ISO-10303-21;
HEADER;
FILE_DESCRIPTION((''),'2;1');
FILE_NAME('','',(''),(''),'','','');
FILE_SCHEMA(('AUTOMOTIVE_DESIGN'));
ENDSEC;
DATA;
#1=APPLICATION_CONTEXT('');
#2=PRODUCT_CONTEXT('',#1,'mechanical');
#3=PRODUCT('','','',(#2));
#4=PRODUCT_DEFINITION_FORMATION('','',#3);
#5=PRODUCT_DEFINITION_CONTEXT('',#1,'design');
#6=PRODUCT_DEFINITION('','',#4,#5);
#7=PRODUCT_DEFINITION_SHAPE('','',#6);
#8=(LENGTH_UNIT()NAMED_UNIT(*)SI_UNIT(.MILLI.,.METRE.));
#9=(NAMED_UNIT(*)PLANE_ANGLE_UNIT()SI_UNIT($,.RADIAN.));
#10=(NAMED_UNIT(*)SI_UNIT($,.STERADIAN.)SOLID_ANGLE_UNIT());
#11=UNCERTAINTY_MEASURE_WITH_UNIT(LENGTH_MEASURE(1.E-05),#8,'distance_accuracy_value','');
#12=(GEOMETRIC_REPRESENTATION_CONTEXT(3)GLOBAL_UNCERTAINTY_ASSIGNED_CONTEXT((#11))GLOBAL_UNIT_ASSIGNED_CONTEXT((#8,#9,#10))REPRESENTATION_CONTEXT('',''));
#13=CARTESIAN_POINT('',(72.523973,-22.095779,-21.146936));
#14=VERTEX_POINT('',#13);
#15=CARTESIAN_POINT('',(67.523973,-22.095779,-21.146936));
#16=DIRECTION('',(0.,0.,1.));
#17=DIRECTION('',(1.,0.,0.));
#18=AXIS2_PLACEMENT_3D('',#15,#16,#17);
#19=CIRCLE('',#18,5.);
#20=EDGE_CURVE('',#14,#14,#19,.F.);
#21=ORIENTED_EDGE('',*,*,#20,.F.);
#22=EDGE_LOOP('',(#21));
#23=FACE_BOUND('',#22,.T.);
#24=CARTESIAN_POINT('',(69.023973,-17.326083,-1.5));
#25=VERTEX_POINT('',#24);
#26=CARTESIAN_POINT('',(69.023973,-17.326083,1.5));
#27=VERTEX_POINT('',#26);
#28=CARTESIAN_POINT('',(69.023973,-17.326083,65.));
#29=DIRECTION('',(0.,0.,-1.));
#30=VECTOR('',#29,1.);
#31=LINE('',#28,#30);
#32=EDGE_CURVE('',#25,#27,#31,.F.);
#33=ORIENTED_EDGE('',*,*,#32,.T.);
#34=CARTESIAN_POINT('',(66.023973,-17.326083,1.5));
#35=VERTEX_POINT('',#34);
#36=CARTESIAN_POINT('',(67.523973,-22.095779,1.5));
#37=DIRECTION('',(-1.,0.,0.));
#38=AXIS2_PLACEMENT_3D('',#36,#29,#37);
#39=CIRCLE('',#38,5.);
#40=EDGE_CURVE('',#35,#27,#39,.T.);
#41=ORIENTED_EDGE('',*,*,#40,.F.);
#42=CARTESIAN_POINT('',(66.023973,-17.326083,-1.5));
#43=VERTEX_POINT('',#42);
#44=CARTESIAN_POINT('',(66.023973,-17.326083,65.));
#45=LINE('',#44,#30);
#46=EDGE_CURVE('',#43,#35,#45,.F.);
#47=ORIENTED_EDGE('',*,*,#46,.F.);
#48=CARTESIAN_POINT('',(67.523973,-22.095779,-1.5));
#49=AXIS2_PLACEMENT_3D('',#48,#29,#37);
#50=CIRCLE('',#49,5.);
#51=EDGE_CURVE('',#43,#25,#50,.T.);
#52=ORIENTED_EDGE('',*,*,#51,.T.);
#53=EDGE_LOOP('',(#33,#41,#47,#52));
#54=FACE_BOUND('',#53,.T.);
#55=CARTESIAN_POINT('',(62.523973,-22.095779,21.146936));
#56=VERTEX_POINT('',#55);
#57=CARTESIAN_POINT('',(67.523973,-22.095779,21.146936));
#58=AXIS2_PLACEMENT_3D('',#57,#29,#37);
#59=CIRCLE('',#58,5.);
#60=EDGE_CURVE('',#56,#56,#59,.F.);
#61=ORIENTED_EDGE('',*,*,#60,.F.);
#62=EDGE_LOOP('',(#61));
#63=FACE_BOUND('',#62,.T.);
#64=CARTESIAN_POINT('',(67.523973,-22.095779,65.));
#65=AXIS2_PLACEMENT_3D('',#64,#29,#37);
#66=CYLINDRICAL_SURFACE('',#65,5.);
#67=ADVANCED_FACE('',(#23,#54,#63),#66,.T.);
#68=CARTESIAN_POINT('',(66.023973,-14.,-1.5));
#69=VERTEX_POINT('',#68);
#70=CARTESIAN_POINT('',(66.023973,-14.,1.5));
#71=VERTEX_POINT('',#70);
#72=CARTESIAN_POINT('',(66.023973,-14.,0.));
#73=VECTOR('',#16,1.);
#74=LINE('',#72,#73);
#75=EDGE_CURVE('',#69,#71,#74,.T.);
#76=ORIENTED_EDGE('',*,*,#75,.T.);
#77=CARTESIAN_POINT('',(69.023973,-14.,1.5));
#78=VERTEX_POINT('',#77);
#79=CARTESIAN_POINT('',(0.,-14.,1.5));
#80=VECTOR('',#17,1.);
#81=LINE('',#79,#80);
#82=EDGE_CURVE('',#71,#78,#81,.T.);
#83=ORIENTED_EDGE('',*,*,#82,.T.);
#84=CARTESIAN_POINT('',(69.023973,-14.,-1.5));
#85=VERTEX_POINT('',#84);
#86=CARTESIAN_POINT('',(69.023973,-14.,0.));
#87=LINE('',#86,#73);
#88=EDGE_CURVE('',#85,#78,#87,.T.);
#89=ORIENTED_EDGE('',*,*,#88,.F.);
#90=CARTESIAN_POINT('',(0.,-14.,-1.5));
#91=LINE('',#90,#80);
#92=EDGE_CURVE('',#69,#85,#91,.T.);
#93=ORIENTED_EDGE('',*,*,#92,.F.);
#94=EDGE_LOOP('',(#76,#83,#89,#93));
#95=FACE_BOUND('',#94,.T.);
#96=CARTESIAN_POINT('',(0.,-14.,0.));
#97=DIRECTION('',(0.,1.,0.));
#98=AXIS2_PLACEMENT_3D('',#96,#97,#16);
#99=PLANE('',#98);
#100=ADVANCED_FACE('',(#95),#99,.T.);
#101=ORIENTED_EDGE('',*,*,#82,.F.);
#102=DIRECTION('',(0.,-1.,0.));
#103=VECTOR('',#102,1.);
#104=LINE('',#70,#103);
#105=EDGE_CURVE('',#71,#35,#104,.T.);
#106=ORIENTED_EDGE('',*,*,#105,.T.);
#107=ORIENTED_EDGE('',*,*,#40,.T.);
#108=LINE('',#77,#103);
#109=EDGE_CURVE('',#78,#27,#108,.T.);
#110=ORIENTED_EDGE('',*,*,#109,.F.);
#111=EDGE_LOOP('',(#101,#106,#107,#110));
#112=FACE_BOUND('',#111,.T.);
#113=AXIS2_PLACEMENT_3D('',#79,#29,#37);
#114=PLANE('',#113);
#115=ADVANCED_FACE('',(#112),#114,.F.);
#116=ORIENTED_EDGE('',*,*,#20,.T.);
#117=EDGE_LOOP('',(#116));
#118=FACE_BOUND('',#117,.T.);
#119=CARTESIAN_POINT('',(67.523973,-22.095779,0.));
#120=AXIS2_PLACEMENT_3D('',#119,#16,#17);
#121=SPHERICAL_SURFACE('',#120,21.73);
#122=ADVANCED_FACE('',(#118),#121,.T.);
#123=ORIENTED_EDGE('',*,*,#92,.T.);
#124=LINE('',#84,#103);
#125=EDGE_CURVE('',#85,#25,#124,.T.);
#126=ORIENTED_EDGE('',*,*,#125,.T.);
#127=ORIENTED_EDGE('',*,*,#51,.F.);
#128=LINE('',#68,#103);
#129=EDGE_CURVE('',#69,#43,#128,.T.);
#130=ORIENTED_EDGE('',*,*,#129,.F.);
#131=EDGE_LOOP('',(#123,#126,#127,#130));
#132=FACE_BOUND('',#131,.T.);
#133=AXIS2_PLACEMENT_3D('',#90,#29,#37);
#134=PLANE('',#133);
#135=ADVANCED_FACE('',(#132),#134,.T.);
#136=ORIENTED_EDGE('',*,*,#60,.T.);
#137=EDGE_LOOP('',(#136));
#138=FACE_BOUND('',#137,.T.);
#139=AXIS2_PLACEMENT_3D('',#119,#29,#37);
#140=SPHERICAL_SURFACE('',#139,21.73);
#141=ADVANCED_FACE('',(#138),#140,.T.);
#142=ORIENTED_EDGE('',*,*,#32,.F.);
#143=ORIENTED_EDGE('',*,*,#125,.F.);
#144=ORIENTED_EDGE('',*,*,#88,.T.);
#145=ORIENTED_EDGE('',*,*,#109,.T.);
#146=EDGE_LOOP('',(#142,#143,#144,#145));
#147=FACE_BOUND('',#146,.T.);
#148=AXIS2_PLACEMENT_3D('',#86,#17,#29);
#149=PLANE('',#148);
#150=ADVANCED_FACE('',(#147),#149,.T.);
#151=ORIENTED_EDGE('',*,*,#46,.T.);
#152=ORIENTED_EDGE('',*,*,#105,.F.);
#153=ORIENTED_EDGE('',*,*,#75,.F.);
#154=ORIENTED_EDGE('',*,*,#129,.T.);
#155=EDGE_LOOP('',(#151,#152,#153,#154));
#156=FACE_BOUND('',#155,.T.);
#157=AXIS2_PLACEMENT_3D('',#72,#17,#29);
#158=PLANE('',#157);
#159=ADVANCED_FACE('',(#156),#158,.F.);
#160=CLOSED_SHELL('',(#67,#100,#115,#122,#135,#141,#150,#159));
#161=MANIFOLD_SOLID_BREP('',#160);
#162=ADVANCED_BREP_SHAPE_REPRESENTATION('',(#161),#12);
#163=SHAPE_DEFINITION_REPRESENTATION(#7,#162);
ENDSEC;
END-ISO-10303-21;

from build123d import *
from build123d.topology import SkipClean

# Parameters (mm, degrees)
BOSS_EXTRUDE1_DEPTH       = 2
CUT_EXTRUDE4_DEPTH        = 10
SKETCH6_W                 = 2
SKETCH6_H                 = 14.5
CUT_EXTRUDE5_DEPTH        = 10
SKETCH7_W                 = 12.5
SKETCH7_H                 = 12.5
BOSS_EXTRUDE2_DEPTH       = 2.5
SKETCH8_W                 = 2
SKETCH8_H                 = 2
BOSS_EXTRUDE3_DEPTH       = 41.5
CUT_EXTRUDE6_DEPTH        = 41.5
SKETCH10_W                = 2
SKETCH10_H                = 2
BOSS_EXTRUDE4_DEPTH       = 50.5
CUT_EXTRUDE7_DEPTH        = 50.5
SKETCH12_W                = 12.5
SKETCH12_H                = 12.5
BOSS_EXTRUDE5_DEPTH       = 2.5
CUT_EXTRUDE8_DEPTH        = 60.477411679
CUT_EXTRUDE8_DEPTH_BACK   = 2.5
SKETCH14_W                = 12.5
SKETCH14_H                = 12.5
BOSS_EXTRUDE6_DEPTH       = 2.5
SKETCH15_W                = 2
SKETCH15_H                = 2
BOSS_EXTRUDE7_DEPTH       = 39.5
SKETCH16_W                = 12.5
SKETCH16_H                = 12.5
BOSS_EXTRUDE8_DEPTH       = 2.5
SKETCH17_W                = 2
SKETCH17_H                = 12.5
BOSS_EXTRUDE9_DEPTH       = 2.5
SKETCH18_W                = 2
SKETCH18_H                = 12.5
CUT_EXTRUDE9_DEPTH        = 13.5
SKETCH19_W                = 2
SKETCH19_H                = 2
BOSS_EXTRUDE10_DEPTH      = 7.5
CUT_EXTRUDE11_DEPTH       = 33.5
CUT_EXTRUDE12_DEPTH       = 33.5
SKETCH22_W                = 2
SKETCH22_H                = 2
BOSS_EXTRUDE11_DEPTH      = 35.5
BOSS_EXTRUDE13_DEPTH      = 4
BOSS_EXTRUDE14_DEPTH      = 4
BOSS_EXTRUDE15_DEPTH      = 4
BOSS_EXTRUDE16_DEPTH      = 4
SKETCH28_R                = 4.5
SKETCH28_W                = 2
SKETCH28_H                = 2
BOSS_EXTRUDE17_DEPTH      = 57
SKETCH29_R                = 4.5
SKETCH29_W                = 2
SKETCH29_H                = 2
BOSS_EXTRUDE18_DEPTH      = 57
SKETCH30_R                = 4.5
SKETCH30_W                = 2
SKETCH30_H                = 2
BOSS_EXTRUDE19_DEPTH      = 57
SKETCH31_R                = 4.5
SKETCH31_W                = 2
SKETCH31_H                = 2
BOSS_EXTRUDE20_DEPTH      = 57
SKETCH32_W                = 122.959633523
SKETCH32_H                = 42.81362782
CUT_EXTRUDE13_DEPTH       = 57
BOSS_EXTRUDE21_DEPTH      = 1
CUT_EXTRUDE14_DEPTH       = 8
CUT_EXTRUDE15_DEPTH       = 8
CUT_EXTRUDE16_DEPTH       = 8
CUT_EXTRUDE17_DEPTH       = 8
BOSS_EXTRUDE22_DEPTH      = 1
BOSS_EXTRUDE23_DEPTH      = 2
BOSS_EXTRUDE23_DEPTH_BACK = 2
BOSS_EXTRUDE24_DEPTH      = 4
BOSS_EXTRUDE25_DEPTH      = 12.5
CUT_EXTRUDE18_DEPTH       = 12.5
SKETCH43_W                = 16
SKETCH43_H                = 2
CUT_EXTRUDE19_DEPTH       = 8.5
SKETCH44_R                = 1.5
CUT_EXTRUDE20_DEPTH       = 8.5
SKETCH45_R                = 9
BOSS_EXTRUDE27_DEPTH      = 20
CUT_EXTRUDE23_START       = -30
SKETCH50_R                = 9
CUT_EXTRUDE23_DEPTH       = 65
CUT_EXTRUDE24_DEPTH       = 65
CUT_EXTRUDE24_DEPTH_BACK  = 65
SKETCH52_W                = 56.65762051
SKETCH52_H                = 44.736687233
CUT_EXTRUDE25_DEPTH       = 65
CUT_EXTRUDE25_DEPTH_BACK  = 65
CUT_EXTRUDE26_DEPTH       = 65
CUT_EXTRUDE26_DEPTH_BACK  = 68
SKETCH56_R                = 43.614088274
SKETCH56_R_2              = 5
SKETCH57_R                = 5
CUT_EXTRUDE27_DEPTH       = 65
CUT_EXTRUDE28_DEPTH       = 17
CUT_EXTRUDE28_DEPTH_BACK  = 38
SKETCH58_R                = 5
CUT_EXTRUDE29_DEPTH       = 38
CUT_EXTRUDE30_DEPTH       = 38
CUT_EXTRUDE30_DEPTH_BACK  = 38
CUT_EXTRUDE36_DEPTH       = 79
CUT_EXTRUDE36_DEPTH_BACK  = 38
BOSS_EXTRUDE28_START      = -20
SKETCH62_W                = 3
SKETCH62_H                = 3
BOSS_EXTRUDE28_DEPTH      = 6


with BuildPart() as part:
    # Sketch4 → Boss-Extrude1 (new body)
    with BuildSketch(Plane.XY):
        Polygon((-2, 0), (-9, 0), (-15.226290525, 65), (-17.226290525, 65), (-11, 0), (-18, 0), (-24.539432883, 50), (-26.539432883, 50), (-20, 0), (-26, 0), (-26, -2), (15, -2), (15, 0), (9, 0), (13.425952869, 55), (11.425952869, 55), (7, 0), (0, 0), (0, 65), (-2, 65), align=None)
    extrude(amount=BOSS_EXTRUDE1_DEPTH)

    # Sketch5 → Cut-Extrude4 (cut)
    with BuildSketch(Plane.XY.offset(2)):
        Polygon((9.37564634, 55.872220493), (11.411691477, 54.822777915), (13.398823363, 54.662869695), (21.924639112, 53.976781356), (22.692490212, 57.613912627), (5.524505056, 72.3940809), (-16.325209023, 68.104380376), (-29.665618302, 62.849218827), (-29.083331676, 48.976254453), (-26.450573674, 49.320589338), (-24.484209654, 49.577767448), (-21.099856707, 50.020402427), (-24.484209654, 55.686609511), (-20.205422124, 64.224167275), (-17.179736544, 64.513994928), (-15.197920791, 64.703831246), (-10.585008306, 65.145697912), (2.587624418, 67.202095486), align=None)
    extrude(amount=-CUT_EXTRUDE4_DEPTH, mode=Mode.SUBTRACT)

    # Sketch6 → Cut-Extrude5 (cut)
    with BuildSketch(Plane.XY.offset(2)):
        Polygon((-22.603788855, 35.200214888), (-24.484209654, 49.577767448), (-26.450573674, 49.320589338), (-24.570152875, 34.943036778), align=None)
        Polygon((-13.815307691, 50.26989966), (-15.197920791, 64.703831246), (-17.179736544, 64.513994928), (-15.797123444, 50.080063343), align=None)
        with Locations((-1, 57.75)):
            Rectangle(SKETCH6_W, SKETCH6_H)
        Polygon((13.398823363, 54.662869695), (11.411691477, 54.822777915), (10.248609178, 40.369500101), (12.235741065, 40.209591881), align=None)
    extrude(amount=-CUT_EXTRUDE5_DEPTH, mode=Mode.SUBTRACT)

    # Sketch7 → Boss-Extrude2 (add)
    with BuildSketch(Plane(origin=(0, 50.5, 0), x_dir=(1, 0, 0), z_dir=(0, 1, 0))):
        with Locations((-1, -1)):
            Rectangle(SKETCH7_W, SKETCH7_H)
    extrude(amount=BOSS_EXTRUDE2_DEPTH)

    # Sketch8 → Boss-Extrude3 (add)
    with BuildSketch(Plane(origin=(3.293647576, 40.929178869, 0), x_dir=(0.9967777802722212, -0.08021257230374512, 0), z_dir=(0.08021257230374512, 0.9967777802722212, 0))):
        with Locations((11.977444462, -1)):
            Rectangle(SKETCH8_W, SKETCH8_H)
    extrude(amount=-BOSS_EXTRUDE3_DEPTH)

    # Sketch9 → Cut-Extrude6 (cut)
    with BuildSketch(Plane.XY.offset(2)):
        Polygon((7, 0), (9, 0), (12.235741065, 40.209591881), (10.248609178, 40.369500101), align=None)
    extrude(amount=-CUT_EXTRUDE6_DEPTH, mode=Mode.SUBTRACT)

    # Sketch10 → Boss-Extrude4 (add)
    with BuildSketch(Plane(origin=(-4.897136804, 51.124163089, 0), x_dir=(0.995443557626006, 0.09535262755100443, 0), z_dir=(-0.09535262755100443, 0.995443557626006, 0))):
        with Locations((-13.958992019, -1)):
            Rectangle(SKETCH10_W, SKETCH10_H)
    extrude(amount=-BOSS_EXTRUDE4_DEPTH)

    # Sketch11 → Cut-Extrude7 (cut)
    with BuildSketch(Plane.XY.offset(2)):
        Polygon((-11, 0), (-9, 0), (-13.815307691, 50.26989966), (-15.797123444, 50.080063343), align=None)
    extrude(amount=-CUT_EXTRUDE7_DEPTH, mode=Mode.SUBTRACT)

    # Sketch12 → Boss-Extrude5 (add)
    with BuildSketch(Plane(origin=(3.293647576, 40.929178869, 0), x_dir=(0.9967777802722212, -0.08021257230374557, 0), z_dir=(0.08021257230374557, 0.9967777802722213, 0))):
        with Locations((11.977444462, -1)):
            Rectangle(SKETCH12_W, SKETCH12_H)
    extrude(amount=BOSS_EXTRUDE5_DEPTH)

    # Sketch13 → Cut-Extrude8 (cut, two sides: drawn at the far end of the back side and taken through both)
    with BuildSketch(Plane.XY.offset(2).offset(-CUT_EXTRUDE8_DEPTH_BACK)):
        Polygon((-17.606376667, 47.897602035), (-17.797081922, 49.88848915), (-19.787969037, 49.697783895), (-19.637893395, 48.131053798), (-19.615531264, 47.897602035), (-19.597263782, 47.70689678), align=None)
    extrude(amount=CUT_EXTRUDE8_DEPTH + CUT_EXTRUDE8_DEPTH_BACK, mode=Mode.SUBTRACT)

    # Sketch14 → Boss-Extrude6 (add)
    with BuildSketch(Plane(origin=(-4.706431548, 49.133275974, 0), x_dir=(0.995443557626006, 0.0953526275510043, 0), z_dir=(-0.0953526275510043, 0.995443557626006, 0))):
        with Locations((-13.958992019, -1)):
            Rectangle(SKETCH14_W, SKETCH14_H)
    extrude(amount=BOSS_EXTRUDE6_DEPTH)



with BuildPart() as body_2:
    # Sketch15 → Boss-Extrude7 (new body)
    with BuildSketch(Plane(origin=(-4.906512673, 37.514817884, 0), x_dir=(0.9915553489661718, 0.12968419308679568, 0), z_dir=(-0.12968419308679568, 0.9915553489661719, 0))):
        with Locations((-30.847996281, -1)):
            Rectangle(SKETCH15_W, SKETCH15_H)
    extrude(amount=-BOSS_EXTRUDE7_DEPTH)

    # Sketch16 → Boss-Extrude8 (add)
    with BuildSketch(Plane(origin=(-4.906512673, 37.514817884, 0), x_dir=(0.9915553489661718, 0.1296841930867958, 0), z_dir=(-0.1296841930867958, 0.9915553489661719, 0))):
        with Locations((-30.847996281, -1)):
            Rectangle(SKETCH16_W, SKETCH16_H)
    extrude(amount=BOSS_EXTRUDE8_DEPTH)

    # Sketch17 → Boss-Extrude9 (add)
    with BuildSketch(Plane(origin=(-5.230723156, 39.993706257, 0), x_dir=(0.9915553489661718, 0.12968419308679563, 0), z_dir=(-0.12968419308679563, 0.9915553489661718, 0))):
        with Locations((-23.597996281, -1)):
            Rectangle(SKETCH17_W, SKETCH17_H)
    extrude(amount=-BOSS_EXTRUDE9_DEPTH)

    # Sketch18 → Cut-Extrude9 (cut)
    with BuildSketch(Plane(origin=(-5.230723156, 39.993706257, 0), x_dir=(0.9915553489661718, 0.12968419308679563, 0), z_dir=(-0.12968419308679563, 0.9915553489661718, 0))):
        with Locations((-36.097996281, -1)):
            Rectangle(SKETCH18_W, SKETCH18_H)
    extrude(amount=-CUT_EXTRUDE9_DEPTH, mode=Mode.SUBTRACT)


with BuildPart() as part_1:
    add(part.part)

    add(body_2.part)  # Boss-Extrude10 merges body 2
    # Sketch19 → Boss-Extrude10 (add)
    with BuildSketch(Plane.ZY.offset(26)):
        with Locations((1, -1)):
            Rectangle(SKETCH19_W, SKETCH19_H)
    extrude(amount=BOSS_EXTRUDE10_DEPTH)

    # Sketch20 → Cut-Extrude11 (cut)
    with BuildSketch(Plane.XY.offset(2)):
        Polygon((-31.857654672, -2), (-29.840621531, -2), (-29.379927415, -5.522431713), (-31.363038113, -5.781800099), align=None)
        Polygon((-20, 0), (-18, 0), (-22.603788855, 35.200214888), (-24.570152875, 34.943036778), align=None)
    extrude(amount=-CUT_EXTRUDE11_DEPTH, mode=Mode.SUBTRACT)

    # Sketch21 → Cut-Extrude12 (cut)
    with BuildSketch(Plane.XY.offset(2)):
        Polygon((-36.48556374, 33.384636185), (-34.502453042, 33.644004571), (-30.102198846, 0), (-32.119231987, 0), align=None)
    extrude(amount=-CUT_EXTRUDE12_DEPTH, mode=Mode.SUBTRACT)


with BuildPart() as cut_extrude12_piece_1:
    # of the separate pieces the step leaves, piece 1, a body of its own (cut_extrude12_pieces)
    add(part_1.part.solids().sort_by_distance((-15.027463791, 0, 0))[0])



with BuildPart() as cut_extrude12_piece_2:
    # of the separate pieces the step leaves, piece 2, a body of its own (cut_extrude12_pieces)
    add(part_1.part.solids().sort_by_distance((-40.032329107, 35.44205093, -5.25))[0])


with BuildPart() as cut_extrude12_piece_1_1:
    add(cut_extrude12_piece_1.part)

    add(cut_extrude12_piece_2.part)  # Boss-Extrude11 merges Cut-Extrude12 piece 2
    # Sketch22 → Boss-Extrude11 (add)
    with BuildSketch(Plane(origin=(-4.906512673, 37.514817884, 0), x_dir=(-0.9915553489661718, -0.12968419308679563, 0), z_dir=(0.12968419308679563, -0.9915553489661718, 0))):
        with Locations((28.847996281, -1)):
            Rectangle(SKETCH22_W, SKETCH22_H)
    extrude(amount=BOSS_EXTRUDE11_DEPTH)

    # Sketch24 → Boss-Extrude13 (add)
    with BuildSketch(Plane(origin=(18.168711631, -1.462070207, 0), x_dir=(0, 0, -1), z_dir=(0.9967777802722213, -0.08021257230374557, 0))):
        with BuildLine():
            Line((5.25, 43.561488006), (5.25, 49.561488006))
            ThreePointArc((5.25, 49.561488006), (-1, 55.538239219), (-7.25, 49.561488006))
            Line((-7.25, 49.561488006), (-7.25, 43.561488006))
            Line((-7.25, 43.561488006), (5.25, 43.561488006))
        make_face()
    extrude(amount=-BOSS_EXTRUDE13_DEPTH)

    # Sketch25 → Boss-Extrude14 (add)
    with BuildSketch(Plane(origin=(5.25, 0, 0), x_dir=(0, 0, -1), z_dir=(1, 0, 0))):
        with BuildLine():
            Line((-7.25, 53), (5.25, 53))
            Line((5.25, 53), (5.25, 59.612068966))
            ThreePointArc((5.25, 59.612068966), (-1, 65), (-7.25, 59.612068966))
            Line((-7.25, 59.612068966), (-7.25, 53))
        make_face()
    extrude(amount=-BOSS_EXTRUDE14_DEPTH)

    # Sketch26 → Boss-Extrude15 (add)
    with BuildSketch(Plane(origin=(-7.673866441, -0.735072645, 0), x_dir=(0, 0, -1), z_dir=(0.995443557626006, 0.0953526275510043, 0))):
        with BuildLine():
            Line((-7.25, 51.858173648), (5.25, 51.858173648))
            Line((5.25, 51.858173648), (5.25, 58.470242613))
            ThreePointArc((5.25, 58.470242613), (-1, 63.858173648), (-7.25, 58.470242613))
            Line((-7.25, 58.470242613), (-7.25, 51.858173648))
        make_face()
    extrude(amount=-BOSS_EXTRUDE15_DEPTH)

    # Sketch27 → Boss-Extrude16 (add)
    with BuildSketch(Plane(origin=(-22.407164089, -2.930602913, 0), x_dir=(0, 0, -1), z_dir=(0.9915553489661718, 0.12968419308679563, 0))):
        with BuildLine():
            Line((-7.25, 40.334315476), (5.25, 40.334315476))
            Line((5.25, 40.334315476), (5.25, 46.946384441))
            ThreePointArc((5.25, 46.946384441), (-1, 52.334315476), (-7.25, 46.946384441))
            Line((-7.25, 46.946384441), (-7.25, 40.334315476))
        make_face()
    extrude(amount=-BOSS_EXTRUDE16_DEPTH)

    # Sketch28 → Boss-Extrude17 (add)
    with BuildSketch(Plane(origin=(0, 50.5, 0), x_dir=(-1, 0, 0), z_dir=(0, -1, 0))):
        with Locations((1, -1)):
            Circle(SKETCH28_R)
        with Locations((1, -1)):
            Rectangle(SKETCH28_W, SKETCH28_H, mode=Mode.SUBTRACT)
    extrude(amount=BOSS_EXTRUDE17_DEPTH)

    # Sketch29 → Boss-Extrude18 (add)
    with BuildSketch(Plane(origin=(-4.706431548, 49.133275974, 0), x_dir=(-0.995443557626006, -0.09535262755100447, 0), z_dir=(0.09535262755100449, -0.9954435576260061, 0))):
        with Locations((13.958992019, -1)):
            Circle(SKETCH29_R)
        with Locations((13.958992019, -1)):
            Rectangle(SKETCH29_W, SKETCH29_H, mode=Mode.SUBTRACT)
    extrude(amount=BOSS_EXTRUDE18_DEPTH)

    # Sketch30 → Boss-Extrude19 (add)
    with BuildSketch(Plane(origin=(-4.906512673, 37.514817884, 0), x_dir=(0.9915553489661718, 0.12968419308679563, 0), z_dir=(0.12968419308679563, -0.9915553489661718, 0))):
        with Locations((-28.847996281, 1)):
            Circle(SKETCH30_R)
        with Locations((-28.847996281, 1)):
            Rectangle(SKETCH30_W, SKETCH30_H, mode=Mode.SUBTRACT)
    extrude(amount=BOSS_EXTRUDE19_DEPTH)

    # Sketch31 → Boss-Extrude20 (add)
    with BuildSketch(Plane(origin=(3.293647576, 40.929178869, 0), x_dir=(-0.9967777802722212, 0.08021257230374572, 0), z_dir=(-0.0802125723037457, -0.9967777802722211, 0))):
        with Locations((-11.977444462, -1)):
            Circle(SKETCH31_R)
        with Locations((-11.977444462, -1)):
            Rectangle(SKETCH31_W, SKETCH31_H, mode=Mode.SUBTRACT)
    extrude(amount=BOSS_EXTRUDE20_DEPTH)

    # Sketch32 → Cut-Extrude13 (cut)
    with BuildSketch(Plane.XZ.offset(2)):
        with Locations((-20.029572383, 0.792189378)):
            Rectangle(SKETCH32_W, SKETCH32_H)
    extrude(amount=CUT_EXTRUDE13_DEPTH, mode=Mode.SUBTRACT)

    # Sketch33 → Boss-Extrude21 (add)
    with BuildSketch(Plane(origin=(0, -2, 0), x_dir=(-1, 0, 0), z_dir=(0, -1, 0))):
        with BuildLine():
            Line((-14.023148824, -9), (30.976851176, -9))
            ThreePointArc((30.976851176, -9), (34.512385082, -7.535533906), (35.976851176, -4))
            Line((35.976851176, -4), (35.976851176, 2))
            ThreePointArc((35.976851176, 2), (34.512385082, 5.535533906), (30.976851176, 7))
            Line((30.976851176, 7), (-14.023148824, 7))
            ThreePointArc((-14.023148824, 7), (-17.55868273, 5.535533906), (-19.023148824, 2))
            Line((-19.023148824, 2), (-19.023148824, -4))
            ThreePointArc((-19.023148824, -4), (-17.55868273, -7.535533906), (-14.023148824, -9))
        make_face()
    extrude(amount=BOSS_EXTRUDE21_DEPTH)

    # Sketch34 → Cut-Extrude14 (cut)
    with BuildSketch(Plane(origin=(-26.373385485, -3.449339685, 0), x_dir=(0, 0, 1), z_dir=(-0.9915553489661718, -0.12968419308679557, 0))):
        with BuildLine():
            ThreePointArc((1, 45.434315476), (2.060660172, 45.873655304), (2.5, 46.934315476))
            ThreePointArc((2.5, 46.934315476), (-0.060660172, 47.994975647), (1, 45.434315476))
        make_face()
    extrude(amount=-CUT_EXTRUDE14_DEPTH, mode=Mode.SUBTRACT)

    # Sketch35 → Cut-Extrude15 (cut)
    with BuildSketch(Plane(origin=(-11.655640671, -1.116483155, 0), x_dir=(0, 0, 1), z_dir=(-0.995443557626006, -0.09535262755100442, 0))):
        with BuildLine():
            ThreePointArc((1, 56.958173648), (2.060660172, 57.397513476), (2.5, 58.458173648))
            ThreePointArc((2.5, 58.458173648), (-0.060660172, 59.51883382), (1, 56.958173648))
        make_face()
    extrude(amount=-CUT_EXTRUDE15_DEPTH, mode=Mode.SUBTRACT)

    # Sketch36 → Cut-Extrude16 (cut)
    with BuildSketch(Plane.ZY.offset(-1.25)):
        with BuildLine():
            ThreePointArc((1, 58.1), (2.060660172, 58.539339828), (2.5, 59.6))
            ThreePointArc((2.5, 59.6), (-0.060660172, 60.660660172), (1, 58.1))
        make_face()
    extrude(amount=-CUT_EXTRUDE16_DEPTH, mode=Mode.SUBTRACT)

    # Sketch37 → Cut-Extrude17 (cut)
    with BuildSketch(Plane(origin=(14.18160051, -1.141219918, 0), x_dir=(0, 0, 1), z_dir=(-0.9967777802722212, 0.08021257230374561, 0))):
        with BuildLine():
            ThreePointArc((1, 48.661488006), (2.060660172, 49.100827834), (2.5, 50.161488006))
            ThreePointArc((2.5, 50.161488006), (-0.060660172, 51.222148178), (1, 48.661488006))
        make_face()
    extrude(amount=-CUT_EXTRUDE17_DEPTH, mode=Mode.SUBTRACT)

    # Sketch38 → Boss-Extrude22 (add)
    with BuildSketch(Plane(origin=(0, -3, 0), x_dir=(-1, 0, 0), z_dir=(0, -1, 0))):
        with BuildLine():
            ThreePointArc((-14.023148824, -9), (-17.55868273, -7.535533906), (-19.023148824, -4))
            Line((-19.023148824, -4), (-19.023148824, -11))
            ThreePointArc((-19.023148824, -11), (-17.55868273, -14.535533906), (-14.023148824, -16))
            Line((-14.023148824, -16), (30.976851176, -16))
            ThreePointArc((30.976851176, -16), (34.512385082, -14.535533906), (35.976851176, -11))
            Line((35.976851176, -11), (35.976851176, -4))
            ThreePointArc((35.976851176, -4), (34.512385082, -7.535533906), (30.976851176, -9))
            Line((30.976851176, -9), (-14.023148824, -9))
        make_face()
    extrude(amount=-BOSS_EXTRUDE22_DEPTH)



with BuildPart() as body_2_2:
    # Sketch39 → Boss-Extrude23 (new, two sides: drawn at the far end of the back side and taken through both)
    with BuildSketch(Plane(origin=(0, -2, 0), x_dir=(1, 0, 0), z_dir=(0, 1, 0)).offset(-BOSS_EXTRUDE23_DEPTH_BACK)):
        Polygon((-30.0929677, -18.954951288), (-34.512385082, -14.535533906), (-38.931802465, -10.116116524), (-47.770637229, -18.954951288), (-39.165158063, -28.027141652), align=None)
    extrude(amount=BOSS_EXTRUDE23_DEPTH + BOSS_EXTRUDE23_DEPTH_BACK)


with BuildPart() as cut_extrude12_piece_1_2:
    add(cut_extrude12_piece_1_1.part)

    add(body_2_2.part)  # Boss-Extrude24 merges body 2 2
    # Sketch40 → Boss-Extrude24 (add)
    with BuildSketch(Plane(origin=(0, 0, 0), x_dir=(1, 0, 0), z_dir=(0, 1, 0))):
        Polygon((-35.976851176, -8.888761514), (-38.931802465, -10.116116524), (-30.0929677, -18.954951288), (-28.86561269, -16), align=None)
        Polygon((-39.165158063, -28.027141652), (-47.770637229, -18.954951288), (-50.245510964, -21.429825023), (-41.406676199, -30.268659787), align=None)
    extrude(amount=-BOSS_EXTRUDE24_DEPTH)

    # Sketch41 → Boss-Extrude25 (add)
    with BuildSketch(Plane(origin=(0, -2, 0), x_dir=(1, 0, 0), z_dir=(0, 1, 0))):
        Polygon((-44.235103323, -27.440232663), (-41.406676199, -30.268659787), (-32.567841434, -21.429825023), (-35.396268559, -18.601397898), align=None)
    extrude(amount=BOSS_EXTRUDE25_DEPTH)

    # Sketch42 → Cut-Extrude18 (cut)
    with BuildSketch(Plane(origin=(-8.39743533, 0, -8.39743533), x_dir=(-0.7071067811865478, 0, 0.7071067811865472), z_dir=(-0.7071067811865472, 0, -0.7071067811865478))):
        with BuildLine():
            ThreePointArc((50.68211612, 5.25), (44.43211612, 10.5), (38.18211612, 5.25))
            ThreePointArc((38.18211612, 5.25), (44.43211612, 16.808543829), (50.68211612, 5.25))
        make_face()
    extrude(amount=-CUT_EXTRUDE18_DEPTH, mode=Mode.SUBTRACT)

    # Sketch43 → Cut-Extrude19 (cut)
    with BuildSketch(Plane(origin=(-14.407842971, 0, -14.407842971), x_dir=(-0.7071067811865479, 0, 0.7071067811865472), z_dir=(-0.7071067811865472, 0, -0.7071067811865479))):
        with Locations((42.68211612, -1)):
            Rectangle(SKETCH43_W, SKETCH43_H)
    extrude(amount=-CUT_EXTRUDE19_DEPTH, mode=Mode.SUBTRACT)

    # Sketch44 → Cut-Extrude20 (cut)
    with BuildSketch(Plane(origin=(-8.39743533, 0, -8.39743533), x_dir=(-0.7071067811865478, 0, 0.7071067811865472), z_dir=(-0.7071067811865472, 0, -0.7071067811865478))):
        with Locations((44.43211612, 4.6)):
            Circle(SKETCH44_R)
    extrude(amount=-CUT_EXTRUDE20_DEPTH, mode=Mode.SUBTRACT)

    # Sketch45 → Boss-Extrude27 (add)
    with BuildSketch(Plane(origin=(0, -3, 0), x_dir=(-1, 0, 0), z_dir=(0, -1, 0))):
        with Locations((8.476851176, -4.5)):
            Circle(SKETCH45_R)
    extrude(amount=BOSS_EXTRUDE27_DEPTH)


with BuildPart() as body_2_3:
    # Sketch46 → Revolve1 (revolve)
    with BuildSketch(Plane.XY):
        with BuildLine():
            Line((-8.476851176, -45.826430986), (-8.476851176, -89.289265837))
            ThreePointArc((-8.476851176, -89.289265837), (13.254566249, -67.557848412), (-8.476851176, -45.826430986))
        make_face()
    revolve(axis=Axis((-8.476851176, -45.826430986, 0), (0, -1, 0)))

    # Sketch50 → Cut-Extrude23 (cut)
    with BuildSketch(Plane(origin=(0, 0, 0), x_dir=(1, 0, 0), z_dir=(0, 1, 0)).offset(CUT_EXTRUDE23_START)):
        with Locations((-8.476851176, 0)):
            Circle(SKETCH50_R)
    extrude(amount=-CUT_EXTRUDE23_DEPTH, mode=Mode.SUBTRACT)

    # Sketch52 → Cut-Extrude24 (cut, two sides: drawn at the far end of the back side and taken through both)
    with BuildSketch(Plane(origin=(0, 0, 0), x_dir=(0, 0, -1), z_dir=(1, 0, 0)).offset(-CUT_EXTRUDE24_DEPTH_BACK)):
        with Locations((0, -67.557848412)):
            Rectangle(SKETCH52_W, SKETCH52_H)
        Polygon((-10.161758641, -47.777694132), (0, -47.777694132), (10.161758641, -47.777694132), (10.161758641, -87.338002691), (0, -87.338002691), (-10.161758641, -87.338002691), align=None, mode=Mode.SUBTRACT)
    extrude(amount=CUT_EXTRUDE24_DEPTH + CUT_EXTRUDE24_DEPTH_BACK, mode=Mode.SUBTRACT)

    # Sketch57 → Cut-Extrude27 (cut)
    with BuildSketch(Plane.XY.offset(10.161758641)):
        with Locations((-8.476851176, -67.557848412)):
            Circle(SKETCH57_R)
    extrude(amount=-CUT_EXTRUDE27_DEPTH, mode=Mode.SUBTRACT)

    # Sketch59 → Cut-Extrude29 (cut)
    with BuildSketch(Plane.XY.offset(10.161758641)):
        Polygon((-2.226851176, -67.557848412), (-2.226851176, -73.807848412), (-14.726851176, -73.807848412), (-14.726851176, -67.557848412), (-40.012372079, -67.557848412), (-40.012372079, -94.995810902), (23.058669727, -94.995810902), (23.058669727, -67.557848412), align=None)
    extrude(amount=-CUT_EXTRUDE29_DEPTH, mode=Mode.SUBTRACT)


with BuildPart() as body_3:
    # Sketch53 → Revolve2 (revolve)
    with BuildSketch(Plane(origin=(0, 0, 0), x_dir=(1, 0, 0), z_dir=(0, 1, 0))):
        with BuildLine():
            Line((-8.800357803, -28.92805964), (-8.800357803, -72.38805964))
            ThreePointArc((-8.800357803, -72.38805964), (-30.530357803, -50.65805964), (-8.800357803, -28.92805964))
        make_face()
    revolve(axis=Axis((-8.800357803, 0, 28.92805964), (0, 0, 1)))

    # Sketch54 → Cut-Extrude25 (cut, two sides: drawn at the far end of the back side and taken through both)
    with SkipClean():  # the faces are left unmerged after this step: merging them gives an invalid solid
        with BuildSketch(Plane(origin=(0, 0, 0), x_dir=(1, 0, 0), z_dir=(0, 1, 0)).offset(-CUT_EXTRUDE25_DEPTH_BACK)):
            with BuildLine():
                ThreePointArc((-18.960357803, -69.866581186), (-14.034463591, -71.748271507), (-8.800357803, -72.38805964))
                ThreePointArc((-8.800357803, -72.38805964), (-3.566252015, -71.748271507), (1.359642197, -69.866581186))
                Line((1.359642197, -69.866581186), (1.359642197, -31.449538093))
                ThreePointArc((1.359642197, -31.449538093), (-3.566252019, -29.567847772), (-8.80035781, -28.92805964))
                ThreePointArc((-8.80035781, -28.92805964), (-14.034463594, -29.567847773), (-18.960357803, -31.449538093))
                Line((-18.960357803, -31.449538093), (-18.960357803, -69.866581186))
            make_face()
        extrude(amount=CUT_EXTRUDE25_DEPTH + CUT_EXTRUDE25_DEPTH_BACK, mode=Mode.SUBTRACT)


with BuildPart() as cut_extrude25_piece_1:
    # of the separate pieces the step leaves, piece 1, a body of its own (cut_extrude25_pieces)
    add(body_3.part.solids().sort_by_distance((1.359642197, -2.431e-06, 31.449538093))[0])


with BuildPart() as cut_extrude25_piece_2:
    # of the separate pieces the step leaves, piece 2, a body of its own (cut_extrude25_pieces)
    add(body_3.part.solids().sort_by_distance((-18.960357803, 0, 69.866581186))[0])


with BuildPart() as body_5:
    # Sketch55 → Revolve3 (revolve)
    with BuildSketch(Plane.XY):
        with BuildLine():
            Line((67.523973483, -43.825779011), (67.523973483, -0.365779011))
            ThreePointArc((67.523973483, -0.365779011), (45.793973483, -22.095779011), (67.523973483, -43.825779011))
        make_face()
    revolve(axis=Axis((67.523973483, -43.825779011, 0), (0, 1, 0)))

    # Sketch56 → Cut-Extrude26 (cut, two sides: drawn at the far end of the back side and taken through both)
    with BuildSketch(Plane.XY.offset(-CUT_EXTRUDE26_DEPTH_BACK)):
        with Locations((67.523973483, -22.095779011)):
            Circle(SKETCH56_R)
        with Locations((67.523973483, -22.095779011)):
            Circle(SKETCH56_R_2, mode=Mode.SUBTRACT)
    extrude(amount=CUT_EXTRUDE26_DEPTH + CUT_EXTRUDE26_DEPTH_BACK, mode=Mode.SUBTRACT)

    # Sketch62 → Boss-Extrude28 (add)
    with BuildSketch(Plane(origin=(0, 0, 0), x_dir=(1, 0, 0), z_dir=(0, 1, 0)).offset(BOSS_EXTRUDE28_START)):
        with Locations((67.523973483, 0)):
            Rectangle(SKETCH62_W, SKETCH62_H)
    extrude(amount=BOSS_EXTRUDE28_DEPTH)


with BuildPart() as cut_extrude28_tool:
    # Sketch58 → Cut-Extrude28 (new, two sides: drawn at the far end of the back side and taken through both)
    with SkipClean():  # the faces are left unmerged after this step: merging them gives an invalid solid
        with BuildSketch(Plane(origin=(0, 0, 0), x_dir=(0, 0, -1), z_dir=(1, 0, 0)).offset(-CUT_EXTRUDE28_DEPTH_BACK)):
            with Locations((-50.65805964, 0)):
                Circle(SKETCH58_R)
        extrude(amount=CUT_EXTRUDE28_DEPTH + CUT_EXTRUDE28_DEPTH_BACK)


with BuildPart() as cut_extrude25_piece_1_1:
    with SkipClean():  # the faces are left unmerged after this step: merging them gives an invalid solid
        add(cut_extrude25_piece_1.part)

        # Cut-Extrude28: cut by cut_extrude28_tool
        add(cut_extrude28_tool.part, mode=Mode.SUBTRACT)


with BuildPart() as cut_extrude25_piece_2_1:
    with SkipClean():  # the faces are left unmerged after this step: merging them gives an invalid solid
        add(cut_extrude25_piece_2.part)

        # Cut-Extrude28: cut by cut_extrude28_tool
        add(cut_extrude28_tool.part, mode=Mode.SUBTRACT)


with BuildPart() as cut_extrude30_tool:
    # Sketch60 → Cut-Extrude30 (new, two sides: drawn at the far end of the back side and taken through both)
    with BuildSketch(Plane(origin=(-18.960357803, 0, 0), x_dir=(0, 0, -1), z_dir=(1, 0, 0)).offset(-CUT_EXTRUDE30_DEPTH_BACK)):
        Polygon((-26.705466863, -24.826098639), (-26.705466863, 0), (-44.40805964, 0), (-44.40805964, -6.25), (-56.90805964, -6.25), (-56.90805964, 0), (-74.610652417, 0), (-74.610652417, -24.826098639), align=None)
    extrude(amount=CUT_EXTRUDE30_DEPTH + CUT_EXTRUDE30_DEPTH_BACK)


with BuildPart() as cut_extrude12_piece_1_3:
    add(cut_extrude12_piece_1_2.part)

    # Cut-Extrude30: cut by cut_extrude30_tool
    add(cut_extrude30_tool.part, mode=Mode.SUBTRACT)


with BuildPart() as cut_extrude25_piece_1_2:
    add(cut_extrude25_piece_1_1.part)

    # Cut-Extrude30: cut by cut_extrude30_tool
    add(cut_extrude30_tool.part, mode=Mode.SUBTRACT)


with BuildPart() as cut_extrude25_piece_2_2:
    add(cut_extrude25_piece_2_1.part)

    # Cut-Extrude30: cut by cut_extrude30_tool
    add(cut_extrude30_tool.part, mode=Mode.SUBTRACT)


with BuildPart() as cut_extrude36_tool:
    # Sketch61 → Cut-Extrude36 (new, two sides: drawn at the far end of the back side and taken through both)
    with BuildSketch(Plane.XY.offset(-CUT_EXTRUDE36_DEPTH_BACK)):
        Polygon((36.856010868, 69.554774267), (-56.142006645, 69.554774267), (-56.142006645, -105.644942173), (31.122269385, -105.644942173), (31.122269385, -34.697128753), (36.856010868, -34.697128753), align=None)
    extrude(amount=CUT_EXTRUDE36_DEPTH + CUT_EXTRUDE36_DEPTH_BACK)


with BuildPart() as cut_extrude12_piece_1_4:
    add(cut_extrude12_piece_1_3.part)

    # Cut-Extrude36: cut by cut_extrude36_tool
    add(cut_extrude36_tool.part, mode=Mode.SUBTRACT)


with BuildPart() as body_2_3_1:
    add(body_2_3.part)

    # Cut-Extrude36: cut by cut_extrude36_tool
    add(cut_extrude36_tool.part, mode=Mode.SUBTRACT)


with BuildPart() as cut_extrude25_piece_1_3:
    add(cut_extrude25_piece_1_2.part)

    # Cut-Extrude36: cut by cut_extrude36_tool
    add(cut_extrude36_tool.part, mode=Mode.SUBTRACT)


with BuildPart() as cut_extrude25_piece_2_3:
    add(cut_extrude25_piece_2_2.part)

    # Cut-Extrude36: cut by cut_extrude36_tool
    add(cut_extrude36_tool.part, mode=Mode.SUBTRACT)


solid = body_5.part
